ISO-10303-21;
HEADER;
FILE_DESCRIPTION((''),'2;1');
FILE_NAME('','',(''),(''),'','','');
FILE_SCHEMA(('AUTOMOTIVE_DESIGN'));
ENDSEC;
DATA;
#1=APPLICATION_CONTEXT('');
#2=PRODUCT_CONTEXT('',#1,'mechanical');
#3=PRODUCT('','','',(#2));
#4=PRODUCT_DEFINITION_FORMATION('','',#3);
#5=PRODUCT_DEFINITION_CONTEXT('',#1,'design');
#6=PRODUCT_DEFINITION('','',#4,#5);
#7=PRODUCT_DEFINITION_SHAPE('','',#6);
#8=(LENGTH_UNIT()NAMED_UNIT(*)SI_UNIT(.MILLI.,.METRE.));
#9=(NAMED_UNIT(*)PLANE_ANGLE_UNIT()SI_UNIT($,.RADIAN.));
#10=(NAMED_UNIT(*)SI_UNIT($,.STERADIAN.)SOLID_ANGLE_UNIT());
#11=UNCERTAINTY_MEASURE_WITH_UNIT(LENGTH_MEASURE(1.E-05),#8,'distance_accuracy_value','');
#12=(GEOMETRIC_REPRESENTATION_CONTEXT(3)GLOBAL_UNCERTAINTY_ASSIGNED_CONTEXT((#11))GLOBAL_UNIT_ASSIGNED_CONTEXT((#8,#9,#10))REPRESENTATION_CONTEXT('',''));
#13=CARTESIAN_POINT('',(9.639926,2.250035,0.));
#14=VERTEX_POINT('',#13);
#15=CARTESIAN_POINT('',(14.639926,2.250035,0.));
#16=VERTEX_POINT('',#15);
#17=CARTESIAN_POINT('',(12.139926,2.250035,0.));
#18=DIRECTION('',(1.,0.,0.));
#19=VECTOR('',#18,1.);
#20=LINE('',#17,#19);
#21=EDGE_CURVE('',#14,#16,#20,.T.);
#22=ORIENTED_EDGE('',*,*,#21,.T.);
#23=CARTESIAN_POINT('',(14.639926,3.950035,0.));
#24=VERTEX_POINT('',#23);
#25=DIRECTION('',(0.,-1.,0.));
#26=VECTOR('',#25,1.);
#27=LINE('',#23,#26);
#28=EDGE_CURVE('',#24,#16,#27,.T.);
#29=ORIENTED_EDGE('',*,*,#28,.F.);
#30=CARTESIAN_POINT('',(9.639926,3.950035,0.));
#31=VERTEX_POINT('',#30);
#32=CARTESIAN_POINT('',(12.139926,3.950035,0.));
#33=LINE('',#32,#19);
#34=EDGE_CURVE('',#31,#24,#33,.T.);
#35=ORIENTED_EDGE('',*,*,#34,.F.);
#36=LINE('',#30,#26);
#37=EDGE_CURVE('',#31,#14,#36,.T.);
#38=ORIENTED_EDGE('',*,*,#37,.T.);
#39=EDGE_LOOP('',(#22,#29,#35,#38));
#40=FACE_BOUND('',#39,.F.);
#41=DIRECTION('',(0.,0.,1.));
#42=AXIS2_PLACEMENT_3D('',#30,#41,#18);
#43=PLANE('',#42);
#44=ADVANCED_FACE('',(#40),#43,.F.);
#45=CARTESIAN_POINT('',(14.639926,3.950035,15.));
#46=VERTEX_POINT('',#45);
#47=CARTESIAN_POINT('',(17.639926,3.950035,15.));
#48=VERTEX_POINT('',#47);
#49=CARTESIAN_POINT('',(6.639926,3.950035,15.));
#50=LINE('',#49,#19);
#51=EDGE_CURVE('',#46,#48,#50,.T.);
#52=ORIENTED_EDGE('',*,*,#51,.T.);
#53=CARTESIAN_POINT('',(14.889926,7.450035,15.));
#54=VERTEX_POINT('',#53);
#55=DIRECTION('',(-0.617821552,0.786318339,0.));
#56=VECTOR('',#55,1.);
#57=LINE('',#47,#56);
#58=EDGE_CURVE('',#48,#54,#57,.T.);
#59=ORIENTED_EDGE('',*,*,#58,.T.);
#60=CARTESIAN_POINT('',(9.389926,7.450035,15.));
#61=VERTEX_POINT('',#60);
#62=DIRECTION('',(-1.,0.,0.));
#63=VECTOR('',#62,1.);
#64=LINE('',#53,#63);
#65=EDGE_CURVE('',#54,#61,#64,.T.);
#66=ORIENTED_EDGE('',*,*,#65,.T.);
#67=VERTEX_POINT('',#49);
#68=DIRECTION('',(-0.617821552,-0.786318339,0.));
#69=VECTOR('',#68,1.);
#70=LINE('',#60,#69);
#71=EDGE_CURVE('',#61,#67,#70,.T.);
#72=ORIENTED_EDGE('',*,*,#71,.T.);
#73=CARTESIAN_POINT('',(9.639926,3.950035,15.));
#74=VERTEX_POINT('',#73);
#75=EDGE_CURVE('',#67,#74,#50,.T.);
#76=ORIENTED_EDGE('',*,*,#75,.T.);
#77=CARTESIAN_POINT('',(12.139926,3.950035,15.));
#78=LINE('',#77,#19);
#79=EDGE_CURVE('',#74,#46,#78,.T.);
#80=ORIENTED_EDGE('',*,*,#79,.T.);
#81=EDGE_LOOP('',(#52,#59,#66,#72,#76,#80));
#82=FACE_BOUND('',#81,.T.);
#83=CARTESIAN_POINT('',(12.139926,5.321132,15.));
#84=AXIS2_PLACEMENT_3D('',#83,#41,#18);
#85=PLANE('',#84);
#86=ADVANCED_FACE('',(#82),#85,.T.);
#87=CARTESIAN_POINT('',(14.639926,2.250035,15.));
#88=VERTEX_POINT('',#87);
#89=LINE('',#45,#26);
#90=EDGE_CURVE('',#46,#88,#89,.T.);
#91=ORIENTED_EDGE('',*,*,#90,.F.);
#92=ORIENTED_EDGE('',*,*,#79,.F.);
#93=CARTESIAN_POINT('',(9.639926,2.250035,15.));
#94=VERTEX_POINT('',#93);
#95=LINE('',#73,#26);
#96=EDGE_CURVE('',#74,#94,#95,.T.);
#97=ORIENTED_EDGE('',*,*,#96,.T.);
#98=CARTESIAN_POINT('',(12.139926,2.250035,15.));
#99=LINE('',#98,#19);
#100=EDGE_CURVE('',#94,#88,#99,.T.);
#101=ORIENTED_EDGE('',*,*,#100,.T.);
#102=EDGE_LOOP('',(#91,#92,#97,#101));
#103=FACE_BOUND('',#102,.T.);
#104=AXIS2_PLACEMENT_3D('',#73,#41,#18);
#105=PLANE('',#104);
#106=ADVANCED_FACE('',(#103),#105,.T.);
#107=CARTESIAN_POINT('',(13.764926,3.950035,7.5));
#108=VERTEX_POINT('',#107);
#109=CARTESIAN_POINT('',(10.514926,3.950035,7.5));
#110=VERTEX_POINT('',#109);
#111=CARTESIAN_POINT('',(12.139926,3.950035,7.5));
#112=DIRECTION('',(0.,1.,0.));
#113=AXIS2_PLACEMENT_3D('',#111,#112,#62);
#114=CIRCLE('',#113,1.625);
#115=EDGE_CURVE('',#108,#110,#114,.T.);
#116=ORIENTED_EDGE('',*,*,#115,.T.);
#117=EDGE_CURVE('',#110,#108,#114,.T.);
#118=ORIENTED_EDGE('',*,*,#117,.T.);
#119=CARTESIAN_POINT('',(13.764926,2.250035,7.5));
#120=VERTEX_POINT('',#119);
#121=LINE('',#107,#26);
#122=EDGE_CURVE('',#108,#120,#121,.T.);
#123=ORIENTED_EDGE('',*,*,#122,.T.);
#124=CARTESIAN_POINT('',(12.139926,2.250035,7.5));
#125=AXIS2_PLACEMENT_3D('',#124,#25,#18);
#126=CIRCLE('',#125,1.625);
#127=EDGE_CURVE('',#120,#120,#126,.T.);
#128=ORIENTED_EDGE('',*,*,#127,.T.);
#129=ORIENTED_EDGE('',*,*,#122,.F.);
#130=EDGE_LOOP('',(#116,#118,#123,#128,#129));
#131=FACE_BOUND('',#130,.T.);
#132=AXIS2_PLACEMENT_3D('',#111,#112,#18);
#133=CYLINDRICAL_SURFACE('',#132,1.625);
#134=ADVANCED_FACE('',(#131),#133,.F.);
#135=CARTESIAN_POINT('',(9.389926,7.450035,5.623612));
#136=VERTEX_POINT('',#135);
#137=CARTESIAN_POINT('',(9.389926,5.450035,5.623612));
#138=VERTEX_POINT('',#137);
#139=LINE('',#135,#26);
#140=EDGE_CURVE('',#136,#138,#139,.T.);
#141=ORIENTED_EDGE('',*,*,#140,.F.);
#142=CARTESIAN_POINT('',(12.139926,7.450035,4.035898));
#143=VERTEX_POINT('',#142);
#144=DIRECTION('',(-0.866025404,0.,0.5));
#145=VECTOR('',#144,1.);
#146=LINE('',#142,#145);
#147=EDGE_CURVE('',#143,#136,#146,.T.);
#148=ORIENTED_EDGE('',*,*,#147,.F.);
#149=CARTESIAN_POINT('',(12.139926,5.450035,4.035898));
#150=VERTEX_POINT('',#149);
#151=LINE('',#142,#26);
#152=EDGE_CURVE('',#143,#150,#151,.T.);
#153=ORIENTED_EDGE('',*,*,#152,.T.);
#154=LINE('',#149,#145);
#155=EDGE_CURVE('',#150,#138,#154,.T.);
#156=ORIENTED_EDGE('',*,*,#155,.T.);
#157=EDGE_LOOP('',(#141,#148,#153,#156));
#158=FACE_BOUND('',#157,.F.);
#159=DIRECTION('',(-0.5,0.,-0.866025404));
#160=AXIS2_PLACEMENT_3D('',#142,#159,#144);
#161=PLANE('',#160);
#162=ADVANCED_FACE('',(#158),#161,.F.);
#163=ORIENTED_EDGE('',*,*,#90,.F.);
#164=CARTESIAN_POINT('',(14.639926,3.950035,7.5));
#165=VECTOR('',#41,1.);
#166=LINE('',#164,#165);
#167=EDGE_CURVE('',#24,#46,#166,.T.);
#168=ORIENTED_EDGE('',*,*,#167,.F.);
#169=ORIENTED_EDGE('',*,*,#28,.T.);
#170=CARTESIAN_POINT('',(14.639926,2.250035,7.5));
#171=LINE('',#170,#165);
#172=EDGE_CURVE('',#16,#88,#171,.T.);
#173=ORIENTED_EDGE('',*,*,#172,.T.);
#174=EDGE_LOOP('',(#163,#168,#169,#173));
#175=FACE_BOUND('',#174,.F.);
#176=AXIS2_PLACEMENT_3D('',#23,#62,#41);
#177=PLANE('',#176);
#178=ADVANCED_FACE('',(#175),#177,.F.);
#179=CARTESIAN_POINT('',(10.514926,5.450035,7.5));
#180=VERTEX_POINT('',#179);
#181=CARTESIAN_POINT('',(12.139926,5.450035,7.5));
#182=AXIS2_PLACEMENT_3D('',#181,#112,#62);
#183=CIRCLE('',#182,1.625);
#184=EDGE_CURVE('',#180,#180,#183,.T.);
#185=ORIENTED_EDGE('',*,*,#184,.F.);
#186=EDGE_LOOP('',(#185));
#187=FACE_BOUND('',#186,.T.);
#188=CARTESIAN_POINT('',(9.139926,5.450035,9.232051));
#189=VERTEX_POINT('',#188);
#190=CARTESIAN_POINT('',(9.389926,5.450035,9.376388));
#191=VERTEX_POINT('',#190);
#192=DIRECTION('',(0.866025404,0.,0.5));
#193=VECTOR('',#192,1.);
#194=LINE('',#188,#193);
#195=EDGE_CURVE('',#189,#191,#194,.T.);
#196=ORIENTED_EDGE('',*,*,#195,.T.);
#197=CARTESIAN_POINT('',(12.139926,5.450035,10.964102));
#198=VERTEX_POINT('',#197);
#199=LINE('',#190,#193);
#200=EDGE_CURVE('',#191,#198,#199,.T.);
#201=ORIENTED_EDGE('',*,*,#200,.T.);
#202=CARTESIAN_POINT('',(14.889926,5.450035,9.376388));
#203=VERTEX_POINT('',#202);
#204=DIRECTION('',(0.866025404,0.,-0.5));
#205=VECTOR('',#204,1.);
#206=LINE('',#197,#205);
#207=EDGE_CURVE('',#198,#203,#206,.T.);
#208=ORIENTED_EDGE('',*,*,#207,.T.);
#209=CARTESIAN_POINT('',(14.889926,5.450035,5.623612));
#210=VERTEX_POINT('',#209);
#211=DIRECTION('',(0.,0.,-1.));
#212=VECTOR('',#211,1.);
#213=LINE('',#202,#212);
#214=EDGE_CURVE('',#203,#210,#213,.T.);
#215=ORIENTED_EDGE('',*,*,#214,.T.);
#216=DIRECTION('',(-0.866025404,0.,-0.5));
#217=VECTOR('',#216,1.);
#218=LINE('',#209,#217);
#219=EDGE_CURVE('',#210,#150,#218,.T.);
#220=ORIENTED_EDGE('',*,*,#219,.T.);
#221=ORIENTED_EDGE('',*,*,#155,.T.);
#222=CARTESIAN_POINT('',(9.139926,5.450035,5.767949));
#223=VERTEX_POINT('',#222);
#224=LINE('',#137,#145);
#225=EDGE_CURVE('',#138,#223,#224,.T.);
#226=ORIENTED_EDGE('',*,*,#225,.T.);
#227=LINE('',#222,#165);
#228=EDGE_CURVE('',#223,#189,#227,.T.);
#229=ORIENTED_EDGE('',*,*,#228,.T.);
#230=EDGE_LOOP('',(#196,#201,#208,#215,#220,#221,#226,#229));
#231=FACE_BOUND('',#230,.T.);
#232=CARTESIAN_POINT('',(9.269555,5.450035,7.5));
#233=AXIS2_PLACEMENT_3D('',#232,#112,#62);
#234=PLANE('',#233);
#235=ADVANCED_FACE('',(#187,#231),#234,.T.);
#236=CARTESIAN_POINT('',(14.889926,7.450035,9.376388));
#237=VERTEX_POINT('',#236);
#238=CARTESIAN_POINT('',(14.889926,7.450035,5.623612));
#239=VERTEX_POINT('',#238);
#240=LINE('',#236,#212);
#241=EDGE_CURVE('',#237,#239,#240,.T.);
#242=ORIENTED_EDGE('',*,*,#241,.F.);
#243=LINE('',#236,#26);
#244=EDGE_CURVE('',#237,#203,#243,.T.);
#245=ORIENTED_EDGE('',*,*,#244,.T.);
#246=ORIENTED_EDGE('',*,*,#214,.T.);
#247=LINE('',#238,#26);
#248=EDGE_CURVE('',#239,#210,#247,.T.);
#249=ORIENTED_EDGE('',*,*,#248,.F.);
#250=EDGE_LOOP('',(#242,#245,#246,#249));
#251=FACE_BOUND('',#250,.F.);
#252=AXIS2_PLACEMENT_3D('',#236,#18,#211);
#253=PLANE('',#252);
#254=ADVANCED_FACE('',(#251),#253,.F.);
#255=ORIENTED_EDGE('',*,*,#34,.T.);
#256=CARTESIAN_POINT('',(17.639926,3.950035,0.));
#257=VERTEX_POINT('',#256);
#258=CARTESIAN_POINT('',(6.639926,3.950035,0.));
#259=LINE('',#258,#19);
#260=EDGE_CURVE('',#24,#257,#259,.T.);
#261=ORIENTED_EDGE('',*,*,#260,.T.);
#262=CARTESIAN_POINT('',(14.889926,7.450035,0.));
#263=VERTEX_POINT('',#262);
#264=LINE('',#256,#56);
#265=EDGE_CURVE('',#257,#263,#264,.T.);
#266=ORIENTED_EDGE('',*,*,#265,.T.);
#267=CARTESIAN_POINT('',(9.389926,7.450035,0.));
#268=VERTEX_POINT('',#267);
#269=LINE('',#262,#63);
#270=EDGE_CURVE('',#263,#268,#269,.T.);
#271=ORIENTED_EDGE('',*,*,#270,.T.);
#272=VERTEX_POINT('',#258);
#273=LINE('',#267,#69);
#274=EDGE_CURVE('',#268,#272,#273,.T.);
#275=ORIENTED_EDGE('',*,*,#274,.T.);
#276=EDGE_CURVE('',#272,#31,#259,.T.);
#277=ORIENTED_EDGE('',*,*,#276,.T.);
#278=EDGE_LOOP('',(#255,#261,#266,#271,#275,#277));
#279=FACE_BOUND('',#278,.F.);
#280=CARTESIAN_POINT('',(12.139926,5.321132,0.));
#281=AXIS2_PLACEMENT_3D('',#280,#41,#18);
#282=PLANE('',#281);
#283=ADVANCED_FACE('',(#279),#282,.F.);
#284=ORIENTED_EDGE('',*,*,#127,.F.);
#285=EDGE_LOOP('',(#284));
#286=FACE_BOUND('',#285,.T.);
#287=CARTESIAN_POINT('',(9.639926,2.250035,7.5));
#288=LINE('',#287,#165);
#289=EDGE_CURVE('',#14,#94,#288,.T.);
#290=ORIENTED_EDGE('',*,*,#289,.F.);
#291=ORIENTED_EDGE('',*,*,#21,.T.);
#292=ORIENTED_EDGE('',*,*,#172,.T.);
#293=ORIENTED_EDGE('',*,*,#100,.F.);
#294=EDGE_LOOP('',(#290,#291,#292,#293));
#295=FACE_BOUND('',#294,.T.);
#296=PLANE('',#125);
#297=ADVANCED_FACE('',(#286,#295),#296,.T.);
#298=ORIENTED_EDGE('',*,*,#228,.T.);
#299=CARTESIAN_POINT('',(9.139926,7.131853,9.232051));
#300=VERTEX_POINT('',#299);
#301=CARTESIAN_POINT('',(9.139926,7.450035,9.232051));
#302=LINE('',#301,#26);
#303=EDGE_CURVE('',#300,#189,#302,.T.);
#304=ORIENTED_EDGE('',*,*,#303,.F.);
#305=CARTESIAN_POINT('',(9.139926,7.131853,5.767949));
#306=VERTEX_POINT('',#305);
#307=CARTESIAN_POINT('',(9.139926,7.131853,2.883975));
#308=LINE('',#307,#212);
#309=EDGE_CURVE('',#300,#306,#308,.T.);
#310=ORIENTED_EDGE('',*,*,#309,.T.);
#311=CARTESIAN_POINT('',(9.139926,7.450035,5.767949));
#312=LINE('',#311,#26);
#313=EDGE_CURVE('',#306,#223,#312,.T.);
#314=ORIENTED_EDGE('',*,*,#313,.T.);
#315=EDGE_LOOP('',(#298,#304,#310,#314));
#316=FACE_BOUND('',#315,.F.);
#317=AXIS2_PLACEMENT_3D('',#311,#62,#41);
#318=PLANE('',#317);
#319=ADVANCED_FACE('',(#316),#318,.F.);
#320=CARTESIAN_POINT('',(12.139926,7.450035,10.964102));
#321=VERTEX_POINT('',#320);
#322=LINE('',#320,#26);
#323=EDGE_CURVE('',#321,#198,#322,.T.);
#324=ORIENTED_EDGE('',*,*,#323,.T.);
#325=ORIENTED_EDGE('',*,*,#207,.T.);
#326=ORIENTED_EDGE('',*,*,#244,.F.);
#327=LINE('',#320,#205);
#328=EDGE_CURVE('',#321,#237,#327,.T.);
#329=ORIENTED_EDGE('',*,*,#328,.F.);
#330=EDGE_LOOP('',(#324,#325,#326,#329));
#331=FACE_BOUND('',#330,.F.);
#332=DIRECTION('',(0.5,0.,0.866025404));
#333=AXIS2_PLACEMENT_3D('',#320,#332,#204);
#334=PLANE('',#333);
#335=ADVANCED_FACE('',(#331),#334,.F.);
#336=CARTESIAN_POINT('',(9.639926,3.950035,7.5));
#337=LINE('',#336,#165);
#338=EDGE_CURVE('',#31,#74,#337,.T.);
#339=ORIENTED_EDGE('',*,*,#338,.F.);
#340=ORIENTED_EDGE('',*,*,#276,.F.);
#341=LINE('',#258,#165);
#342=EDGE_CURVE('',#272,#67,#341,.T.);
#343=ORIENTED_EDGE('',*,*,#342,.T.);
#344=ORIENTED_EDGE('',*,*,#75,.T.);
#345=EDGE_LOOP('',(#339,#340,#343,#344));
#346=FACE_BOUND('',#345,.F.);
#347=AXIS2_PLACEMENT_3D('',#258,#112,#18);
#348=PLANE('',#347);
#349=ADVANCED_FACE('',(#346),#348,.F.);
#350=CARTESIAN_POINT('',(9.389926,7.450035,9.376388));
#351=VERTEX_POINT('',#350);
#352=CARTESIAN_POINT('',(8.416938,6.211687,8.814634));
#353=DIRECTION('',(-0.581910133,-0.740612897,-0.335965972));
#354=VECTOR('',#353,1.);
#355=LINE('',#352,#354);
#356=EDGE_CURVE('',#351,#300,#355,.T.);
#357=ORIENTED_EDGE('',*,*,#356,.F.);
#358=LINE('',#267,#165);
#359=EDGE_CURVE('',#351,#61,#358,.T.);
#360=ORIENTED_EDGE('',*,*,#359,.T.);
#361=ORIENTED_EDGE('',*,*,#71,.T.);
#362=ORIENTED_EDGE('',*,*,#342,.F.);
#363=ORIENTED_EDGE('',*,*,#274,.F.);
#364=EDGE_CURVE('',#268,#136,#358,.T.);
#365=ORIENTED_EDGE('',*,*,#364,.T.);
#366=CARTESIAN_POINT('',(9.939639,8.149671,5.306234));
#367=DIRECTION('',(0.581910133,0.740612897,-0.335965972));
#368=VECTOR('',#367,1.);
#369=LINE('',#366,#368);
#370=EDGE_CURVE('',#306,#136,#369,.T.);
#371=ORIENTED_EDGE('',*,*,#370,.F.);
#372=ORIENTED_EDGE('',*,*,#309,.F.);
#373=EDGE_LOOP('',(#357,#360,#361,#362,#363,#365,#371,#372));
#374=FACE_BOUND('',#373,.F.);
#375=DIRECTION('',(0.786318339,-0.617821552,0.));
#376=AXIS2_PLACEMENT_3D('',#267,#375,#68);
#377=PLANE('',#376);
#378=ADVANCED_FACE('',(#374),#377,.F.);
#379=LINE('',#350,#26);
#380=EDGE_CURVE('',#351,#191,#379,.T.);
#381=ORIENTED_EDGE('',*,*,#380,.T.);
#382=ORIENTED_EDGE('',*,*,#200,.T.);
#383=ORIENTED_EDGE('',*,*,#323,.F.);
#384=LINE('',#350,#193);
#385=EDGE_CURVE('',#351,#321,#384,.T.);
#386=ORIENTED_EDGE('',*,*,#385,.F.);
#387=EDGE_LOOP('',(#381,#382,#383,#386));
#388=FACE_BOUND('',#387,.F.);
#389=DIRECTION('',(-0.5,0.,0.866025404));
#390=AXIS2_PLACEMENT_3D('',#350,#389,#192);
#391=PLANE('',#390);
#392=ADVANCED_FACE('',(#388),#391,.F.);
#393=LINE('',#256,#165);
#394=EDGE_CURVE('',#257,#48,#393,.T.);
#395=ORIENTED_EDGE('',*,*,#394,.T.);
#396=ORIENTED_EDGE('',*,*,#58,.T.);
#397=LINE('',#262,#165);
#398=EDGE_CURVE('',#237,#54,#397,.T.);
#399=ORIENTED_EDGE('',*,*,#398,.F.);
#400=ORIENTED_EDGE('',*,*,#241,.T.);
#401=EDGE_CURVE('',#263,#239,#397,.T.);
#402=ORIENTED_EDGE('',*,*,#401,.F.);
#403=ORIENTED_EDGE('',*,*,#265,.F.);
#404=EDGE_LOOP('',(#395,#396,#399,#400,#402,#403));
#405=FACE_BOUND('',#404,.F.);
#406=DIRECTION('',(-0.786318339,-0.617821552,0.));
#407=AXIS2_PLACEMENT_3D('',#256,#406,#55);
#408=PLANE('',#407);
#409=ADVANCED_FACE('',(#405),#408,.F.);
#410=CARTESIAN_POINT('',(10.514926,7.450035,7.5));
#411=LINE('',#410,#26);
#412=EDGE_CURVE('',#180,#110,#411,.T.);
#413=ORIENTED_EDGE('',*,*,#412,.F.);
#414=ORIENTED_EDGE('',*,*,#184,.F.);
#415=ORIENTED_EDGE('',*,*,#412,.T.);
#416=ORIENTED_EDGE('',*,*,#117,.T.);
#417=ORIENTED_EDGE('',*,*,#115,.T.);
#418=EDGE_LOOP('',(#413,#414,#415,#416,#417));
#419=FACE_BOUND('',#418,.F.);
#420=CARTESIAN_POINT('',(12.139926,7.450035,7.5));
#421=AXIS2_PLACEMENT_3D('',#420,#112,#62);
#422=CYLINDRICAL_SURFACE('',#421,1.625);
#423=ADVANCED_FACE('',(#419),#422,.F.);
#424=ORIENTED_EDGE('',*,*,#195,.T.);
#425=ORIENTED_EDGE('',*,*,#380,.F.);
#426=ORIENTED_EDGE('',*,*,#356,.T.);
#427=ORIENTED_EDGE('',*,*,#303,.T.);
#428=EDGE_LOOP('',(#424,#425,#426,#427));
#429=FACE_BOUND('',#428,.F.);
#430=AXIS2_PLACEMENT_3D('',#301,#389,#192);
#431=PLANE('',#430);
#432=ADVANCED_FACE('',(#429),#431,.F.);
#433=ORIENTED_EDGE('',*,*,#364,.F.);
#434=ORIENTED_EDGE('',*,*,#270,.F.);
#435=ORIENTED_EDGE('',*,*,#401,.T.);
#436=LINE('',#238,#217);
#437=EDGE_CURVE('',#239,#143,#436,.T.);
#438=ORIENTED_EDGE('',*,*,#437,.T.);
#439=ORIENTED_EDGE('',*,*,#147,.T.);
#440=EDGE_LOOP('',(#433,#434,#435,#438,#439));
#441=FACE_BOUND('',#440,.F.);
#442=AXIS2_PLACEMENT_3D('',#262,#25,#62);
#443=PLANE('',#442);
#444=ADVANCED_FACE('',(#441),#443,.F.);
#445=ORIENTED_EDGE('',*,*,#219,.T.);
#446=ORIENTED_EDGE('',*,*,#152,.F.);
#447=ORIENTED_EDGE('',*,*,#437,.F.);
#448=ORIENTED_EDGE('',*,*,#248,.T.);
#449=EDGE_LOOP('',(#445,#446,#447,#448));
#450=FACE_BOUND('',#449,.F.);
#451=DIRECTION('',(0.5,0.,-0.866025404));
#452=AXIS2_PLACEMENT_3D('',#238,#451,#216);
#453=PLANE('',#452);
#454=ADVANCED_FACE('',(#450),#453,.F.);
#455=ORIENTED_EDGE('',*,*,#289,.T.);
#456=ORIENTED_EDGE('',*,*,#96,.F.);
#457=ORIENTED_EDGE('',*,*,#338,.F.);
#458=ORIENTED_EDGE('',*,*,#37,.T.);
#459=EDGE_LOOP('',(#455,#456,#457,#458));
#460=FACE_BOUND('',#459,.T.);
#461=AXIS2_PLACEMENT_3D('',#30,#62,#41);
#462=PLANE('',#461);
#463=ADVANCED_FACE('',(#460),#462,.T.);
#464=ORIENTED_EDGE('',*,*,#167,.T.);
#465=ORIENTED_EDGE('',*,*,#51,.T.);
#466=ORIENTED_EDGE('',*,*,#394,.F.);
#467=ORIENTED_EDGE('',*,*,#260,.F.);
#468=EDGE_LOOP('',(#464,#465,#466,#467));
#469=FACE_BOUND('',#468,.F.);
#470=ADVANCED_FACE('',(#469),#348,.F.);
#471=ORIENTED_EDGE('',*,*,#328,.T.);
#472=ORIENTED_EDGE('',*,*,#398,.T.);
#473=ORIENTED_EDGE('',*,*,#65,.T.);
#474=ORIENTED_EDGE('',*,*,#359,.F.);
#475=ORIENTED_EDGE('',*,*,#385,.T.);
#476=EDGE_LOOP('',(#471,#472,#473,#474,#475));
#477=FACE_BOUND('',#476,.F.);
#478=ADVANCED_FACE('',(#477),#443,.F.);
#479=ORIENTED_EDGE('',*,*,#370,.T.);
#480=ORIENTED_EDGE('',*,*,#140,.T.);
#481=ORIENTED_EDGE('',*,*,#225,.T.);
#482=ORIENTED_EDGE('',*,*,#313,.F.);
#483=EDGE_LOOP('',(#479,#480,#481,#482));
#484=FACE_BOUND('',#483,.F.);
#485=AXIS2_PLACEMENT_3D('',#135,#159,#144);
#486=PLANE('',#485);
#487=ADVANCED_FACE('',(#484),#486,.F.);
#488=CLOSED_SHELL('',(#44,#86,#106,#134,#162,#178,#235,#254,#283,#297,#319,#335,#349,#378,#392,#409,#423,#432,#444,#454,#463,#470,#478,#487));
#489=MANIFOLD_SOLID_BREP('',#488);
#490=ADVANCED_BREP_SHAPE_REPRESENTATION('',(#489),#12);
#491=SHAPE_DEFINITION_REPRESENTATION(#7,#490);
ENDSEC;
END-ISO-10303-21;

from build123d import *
from build123d import SkipClean  # not in build123d's __all__

# Parameters (mm, degrees)
F1_DEPTH = 15
F2_R     = 1.625
F3_DEPTH = 25
F4_DEPTH = 2
F5_W     = 5
F5_H     = 15
F5_R     = 1.625
F6_DEPTH = 1.7


with BuildPart() as f1:
    # F0 (on Top) → F1 (new body)
    with BuildSketch(Plane.XY):
        Polygon((14.889925763, 7.4500351371), (12.139925763, 7.4500351371), (9.389925763, 7.4500351371), (6.639925763, 3.9500351371), (12.139925763, 3.9500351371), (17.639925763, 3.9500351371), align=None)
    extrude(amount=F1_DEPTH)

    # F2 (on face) → F3 (cut)
    with BuildSketch(Plane(origin=(0, 7.4500351371, 0), x_dir=(-1, 0, 0), z_dir=(0, 1, 0))):
        with Locations((-12.139925763, 7.5)):
            Circle(F2_R)
    extrude(amount=-F3_DEPTH, mode=Mode.SUBTRACT)

    # F2 (on face) → F4 (cut)
    with BuildSketch(Plane(origin=(0, 7.4500351371, 0), x_dir=(-1, 0, 0), z_dir=(0, 1, 0))):
        Polygon((-9.139925763, 5.7679491924), (-9.139925763, 9.2320508076), (-9.389925763, 9.3763883749), (-9.389925763, 5.6236116251), align=None)
        Polygon((-9.389925763, 5.6236116251), (-9.389925763, 9.3763883749), (-12.139925763, 10.9641016151), (-14.889925763, 9.3763883749), (-14.889925763, 5.6236116251), (-12.139925763, 4.0358983849), align=None)
        with Locations((-12.139925763, 7.5)):
            Circle(F2_R, mode=Mode.SUBTRACT)
    extrude(amount=-F4_DEPTH, mode=Mode.SUBTRACT)

    # F5 (on face) → F6 (join)
    with BuildSketch(Plane.XZ.offset(-3.9500351371)):
        with Locations((12.139925763, 7.5)):
            Rectangle(F5_W, F5_H)
        with Locations((12.139925763, 7.5)):
            Circle(F5_R, mode=Mode.SUBTRACT)
    with SkipClean():  # cleaning this boolean's faces spoils the solid; the shape is the same uncleaned
        extrude(amount=F6_DEPTH)


solid = f1.part
